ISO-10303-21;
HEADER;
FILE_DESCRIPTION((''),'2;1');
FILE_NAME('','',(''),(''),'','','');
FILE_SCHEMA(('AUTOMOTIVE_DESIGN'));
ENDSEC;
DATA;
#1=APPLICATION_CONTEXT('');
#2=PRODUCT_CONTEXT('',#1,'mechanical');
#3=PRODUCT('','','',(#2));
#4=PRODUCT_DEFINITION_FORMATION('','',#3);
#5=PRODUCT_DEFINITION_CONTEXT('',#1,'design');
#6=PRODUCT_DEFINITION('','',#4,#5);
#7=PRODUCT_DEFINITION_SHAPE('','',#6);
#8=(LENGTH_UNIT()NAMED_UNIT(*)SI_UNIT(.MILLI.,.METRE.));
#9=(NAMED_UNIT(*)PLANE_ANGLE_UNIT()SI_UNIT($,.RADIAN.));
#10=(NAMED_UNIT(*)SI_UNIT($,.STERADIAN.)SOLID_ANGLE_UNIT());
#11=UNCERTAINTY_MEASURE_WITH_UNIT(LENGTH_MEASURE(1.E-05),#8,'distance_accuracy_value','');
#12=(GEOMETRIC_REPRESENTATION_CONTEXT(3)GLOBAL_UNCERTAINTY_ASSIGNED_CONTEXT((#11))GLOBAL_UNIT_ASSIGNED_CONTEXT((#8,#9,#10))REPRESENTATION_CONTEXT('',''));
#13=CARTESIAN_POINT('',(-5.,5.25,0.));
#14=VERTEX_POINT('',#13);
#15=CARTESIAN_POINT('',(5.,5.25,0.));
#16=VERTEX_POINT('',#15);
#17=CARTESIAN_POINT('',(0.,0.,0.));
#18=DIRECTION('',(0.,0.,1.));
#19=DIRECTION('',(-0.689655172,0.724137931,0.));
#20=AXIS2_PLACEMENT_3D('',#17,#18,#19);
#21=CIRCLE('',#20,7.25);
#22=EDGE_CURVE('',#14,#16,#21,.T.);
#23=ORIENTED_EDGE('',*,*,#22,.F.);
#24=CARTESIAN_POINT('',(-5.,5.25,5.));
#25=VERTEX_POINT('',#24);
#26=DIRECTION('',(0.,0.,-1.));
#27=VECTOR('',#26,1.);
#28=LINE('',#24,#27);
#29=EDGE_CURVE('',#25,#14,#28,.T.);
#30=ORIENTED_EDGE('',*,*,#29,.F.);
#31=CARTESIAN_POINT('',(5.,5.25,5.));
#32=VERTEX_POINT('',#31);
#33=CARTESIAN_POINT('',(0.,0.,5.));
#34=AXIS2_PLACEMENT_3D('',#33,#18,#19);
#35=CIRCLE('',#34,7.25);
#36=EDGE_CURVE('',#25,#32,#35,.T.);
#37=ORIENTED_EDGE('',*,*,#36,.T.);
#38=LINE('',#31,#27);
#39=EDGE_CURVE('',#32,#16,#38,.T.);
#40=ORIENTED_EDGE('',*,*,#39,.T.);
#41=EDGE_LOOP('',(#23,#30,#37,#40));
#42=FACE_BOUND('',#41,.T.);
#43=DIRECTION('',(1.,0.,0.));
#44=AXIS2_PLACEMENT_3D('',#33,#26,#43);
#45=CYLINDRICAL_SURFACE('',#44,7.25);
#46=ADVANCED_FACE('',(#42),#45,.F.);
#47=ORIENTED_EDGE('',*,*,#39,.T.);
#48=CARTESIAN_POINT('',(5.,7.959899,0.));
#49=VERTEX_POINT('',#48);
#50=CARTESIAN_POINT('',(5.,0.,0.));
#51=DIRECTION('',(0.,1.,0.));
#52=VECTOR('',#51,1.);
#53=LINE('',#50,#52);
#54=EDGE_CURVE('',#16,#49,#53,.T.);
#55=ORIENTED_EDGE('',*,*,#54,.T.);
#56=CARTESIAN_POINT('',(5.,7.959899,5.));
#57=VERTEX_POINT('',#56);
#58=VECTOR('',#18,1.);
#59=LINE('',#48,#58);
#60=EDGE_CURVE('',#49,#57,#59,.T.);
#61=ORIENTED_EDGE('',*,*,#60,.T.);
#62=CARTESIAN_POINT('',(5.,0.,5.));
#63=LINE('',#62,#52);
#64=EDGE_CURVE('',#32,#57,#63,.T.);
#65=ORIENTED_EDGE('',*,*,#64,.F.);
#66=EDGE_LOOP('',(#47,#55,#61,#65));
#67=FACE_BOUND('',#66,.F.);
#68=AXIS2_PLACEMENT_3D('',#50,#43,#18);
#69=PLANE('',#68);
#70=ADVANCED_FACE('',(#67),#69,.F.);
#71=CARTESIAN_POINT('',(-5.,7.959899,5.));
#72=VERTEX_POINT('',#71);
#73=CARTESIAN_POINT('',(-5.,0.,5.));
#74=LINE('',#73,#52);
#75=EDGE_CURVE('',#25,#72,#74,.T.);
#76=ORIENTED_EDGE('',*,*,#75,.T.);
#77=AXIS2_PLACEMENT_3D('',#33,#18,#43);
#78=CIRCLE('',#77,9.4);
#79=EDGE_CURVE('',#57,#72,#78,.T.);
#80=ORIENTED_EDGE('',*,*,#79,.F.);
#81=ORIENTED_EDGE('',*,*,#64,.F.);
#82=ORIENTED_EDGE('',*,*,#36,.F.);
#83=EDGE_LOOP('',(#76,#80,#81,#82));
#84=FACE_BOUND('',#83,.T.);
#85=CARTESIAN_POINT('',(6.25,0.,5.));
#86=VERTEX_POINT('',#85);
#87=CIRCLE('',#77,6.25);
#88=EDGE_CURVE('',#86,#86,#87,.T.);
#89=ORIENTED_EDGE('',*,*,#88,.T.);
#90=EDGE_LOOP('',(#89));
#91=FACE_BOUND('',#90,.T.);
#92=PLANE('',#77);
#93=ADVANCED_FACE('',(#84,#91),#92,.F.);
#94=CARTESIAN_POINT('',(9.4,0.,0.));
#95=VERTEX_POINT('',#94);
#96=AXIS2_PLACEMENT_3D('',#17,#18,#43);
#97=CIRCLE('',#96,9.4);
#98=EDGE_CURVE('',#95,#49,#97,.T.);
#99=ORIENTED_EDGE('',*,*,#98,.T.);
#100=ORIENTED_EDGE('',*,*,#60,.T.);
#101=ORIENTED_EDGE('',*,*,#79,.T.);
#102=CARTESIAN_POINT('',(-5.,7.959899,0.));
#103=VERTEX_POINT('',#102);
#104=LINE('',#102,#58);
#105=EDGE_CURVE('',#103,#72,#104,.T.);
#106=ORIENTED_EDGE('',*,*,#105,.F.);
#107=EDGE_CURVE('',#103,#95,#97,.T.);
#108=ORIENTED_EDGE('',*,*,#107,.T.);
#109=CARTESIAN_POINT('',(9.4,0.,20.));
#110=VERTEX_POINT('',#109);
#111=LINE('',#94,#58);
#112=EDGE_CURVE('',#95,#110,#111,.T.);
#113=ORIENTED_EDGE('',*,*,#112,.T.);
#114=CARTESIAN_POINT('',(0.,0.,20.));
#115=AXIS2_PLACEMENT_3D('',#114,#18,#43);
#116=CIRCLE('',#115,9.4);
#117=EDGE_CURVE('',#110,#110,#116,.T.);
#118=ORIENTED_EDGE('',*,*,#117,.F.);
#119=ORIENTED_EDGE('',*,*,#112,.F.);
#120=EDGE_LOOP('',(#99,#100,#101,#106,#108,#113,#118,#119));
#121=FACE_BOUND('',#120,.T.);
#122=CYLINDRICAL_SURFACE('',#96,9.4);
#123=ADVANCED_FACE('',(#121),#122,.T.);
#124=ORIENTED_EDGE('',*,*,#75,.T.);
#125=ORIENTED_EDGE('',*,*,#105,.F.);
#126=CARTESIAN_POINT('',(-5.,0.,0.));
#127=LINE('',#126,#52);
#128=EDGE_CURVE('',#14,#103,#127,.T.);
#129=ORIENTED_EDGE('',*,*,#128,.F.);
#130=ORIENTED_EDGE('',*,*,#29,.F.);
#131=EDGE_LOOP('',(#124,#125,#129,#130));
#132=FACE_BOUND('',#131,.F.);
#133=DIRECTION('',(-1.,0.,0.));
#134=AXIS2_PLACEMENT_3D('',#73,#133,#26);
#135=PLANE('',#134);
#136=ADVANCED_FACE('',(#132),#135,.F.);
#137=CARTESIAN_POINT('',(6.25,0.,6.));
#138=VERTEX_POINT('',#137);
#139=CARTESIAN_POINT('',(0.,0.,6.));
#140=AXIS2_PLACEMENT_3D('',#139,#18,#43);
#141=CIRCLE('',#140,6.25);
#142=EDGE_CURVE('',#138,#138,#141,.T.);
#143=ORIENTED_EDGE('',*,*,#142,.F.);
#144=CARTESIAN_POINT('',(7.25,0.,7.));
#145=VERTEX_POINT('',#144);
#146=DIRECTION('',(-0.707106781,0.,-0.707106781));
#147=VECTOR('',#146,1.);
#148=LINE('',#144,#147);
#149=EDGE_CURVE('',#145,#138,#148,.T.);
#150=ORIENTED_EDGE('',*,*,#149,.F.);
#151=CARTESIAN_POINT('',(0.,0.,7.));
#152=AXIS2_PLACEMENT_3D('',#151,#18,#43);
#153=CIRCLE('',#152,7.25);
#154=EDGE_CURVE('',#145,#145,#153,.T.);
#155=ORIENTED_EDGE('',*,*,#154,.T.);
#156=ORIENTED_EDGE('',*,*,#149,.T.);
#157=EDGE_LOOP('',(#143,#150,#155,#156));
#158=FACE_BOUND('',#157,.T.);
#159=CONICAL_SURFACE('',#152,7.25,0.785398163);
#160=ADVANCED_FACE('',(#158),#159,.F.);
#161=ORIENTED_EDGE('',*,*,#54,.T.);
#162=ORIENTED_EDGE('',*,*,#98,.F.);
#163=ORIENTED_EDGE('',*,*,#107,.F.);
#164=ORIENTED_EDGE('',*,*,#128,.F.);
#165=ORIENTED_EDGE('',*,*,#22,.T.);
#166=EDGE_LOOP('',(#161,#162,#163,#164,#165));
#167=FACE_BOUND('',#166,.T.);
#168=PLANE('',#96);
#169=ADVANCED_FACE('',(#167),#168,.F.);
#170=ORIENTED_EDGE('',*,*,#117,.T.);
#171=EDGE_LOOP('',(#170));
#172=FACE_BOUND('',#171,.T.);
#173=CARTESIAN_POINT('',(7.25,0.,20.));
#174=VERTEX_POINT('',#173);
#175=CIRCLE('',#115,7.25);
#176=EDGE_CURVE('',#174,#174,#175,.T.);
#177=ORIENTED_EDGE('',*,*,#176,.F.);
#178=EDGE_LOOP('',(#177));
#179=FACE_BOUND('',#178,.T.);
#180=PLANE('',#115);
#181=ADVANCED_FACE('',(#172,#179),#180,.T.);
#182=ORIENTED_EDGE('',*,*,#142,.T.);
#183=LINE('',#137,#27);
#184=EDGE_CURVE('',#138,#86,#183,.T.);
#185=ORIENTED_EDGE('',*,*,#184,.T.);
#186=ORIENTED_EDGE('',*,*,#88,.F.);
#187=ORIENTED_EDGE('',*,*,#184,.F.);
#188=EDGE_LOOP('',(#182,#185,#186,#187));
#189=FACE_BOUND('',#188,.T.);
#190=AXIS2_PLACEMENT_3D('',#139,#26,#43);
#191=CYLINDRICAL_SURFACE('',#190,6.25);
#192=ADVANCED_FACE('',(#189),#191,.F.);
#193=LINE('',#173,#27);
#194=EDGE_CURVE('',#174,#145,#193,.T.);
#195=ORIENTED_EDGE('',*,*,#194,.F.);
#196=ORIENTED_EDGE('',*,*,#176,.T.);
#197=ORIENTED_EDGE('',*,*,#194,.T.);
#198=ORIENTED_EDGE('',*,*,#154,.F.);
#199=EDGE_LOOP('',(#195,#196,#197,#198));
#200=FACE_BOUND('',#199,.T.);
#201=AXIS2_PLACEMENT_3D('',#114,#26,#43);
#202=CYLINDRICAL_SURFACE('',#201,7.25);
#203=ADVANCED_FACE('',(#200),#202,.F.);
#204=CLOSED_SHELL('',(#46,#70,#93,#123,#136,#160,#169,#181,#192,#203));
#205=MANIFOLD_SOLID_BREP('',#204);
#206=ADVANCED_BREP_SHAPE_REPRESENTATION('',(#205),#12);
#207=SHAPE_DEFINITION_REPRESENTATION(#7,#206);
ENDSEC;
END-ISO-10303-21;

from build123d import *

# Parameters (mm, degrees)
F3_DEPTH = 25


with BuildPart() as f1:
    # F0 (on Front) → F1 (revolve)
    with BuildSketch(Plane.XZ):
        Polygon((7.25, 0), (9.4, 0), (9.4, 20), (7.25, 20), (7.25, 7), (6.25, 6), (6.25, 5), (7.25, 5), align=None)
    revolve(axis=Axis((0, 0, 5), (0, 0, 1)))

    # F2 (on Front) → F3 (cut)
    with BuildSketch(Plane.XZ):
        Polygon((5, 5), (-5, 5), (-5, 0), (0, 0), (5, 0), align=None)
    extrude(amount=-F3_DEPTH, mode=Mode.SUBTRACT)


solid = f1.part
